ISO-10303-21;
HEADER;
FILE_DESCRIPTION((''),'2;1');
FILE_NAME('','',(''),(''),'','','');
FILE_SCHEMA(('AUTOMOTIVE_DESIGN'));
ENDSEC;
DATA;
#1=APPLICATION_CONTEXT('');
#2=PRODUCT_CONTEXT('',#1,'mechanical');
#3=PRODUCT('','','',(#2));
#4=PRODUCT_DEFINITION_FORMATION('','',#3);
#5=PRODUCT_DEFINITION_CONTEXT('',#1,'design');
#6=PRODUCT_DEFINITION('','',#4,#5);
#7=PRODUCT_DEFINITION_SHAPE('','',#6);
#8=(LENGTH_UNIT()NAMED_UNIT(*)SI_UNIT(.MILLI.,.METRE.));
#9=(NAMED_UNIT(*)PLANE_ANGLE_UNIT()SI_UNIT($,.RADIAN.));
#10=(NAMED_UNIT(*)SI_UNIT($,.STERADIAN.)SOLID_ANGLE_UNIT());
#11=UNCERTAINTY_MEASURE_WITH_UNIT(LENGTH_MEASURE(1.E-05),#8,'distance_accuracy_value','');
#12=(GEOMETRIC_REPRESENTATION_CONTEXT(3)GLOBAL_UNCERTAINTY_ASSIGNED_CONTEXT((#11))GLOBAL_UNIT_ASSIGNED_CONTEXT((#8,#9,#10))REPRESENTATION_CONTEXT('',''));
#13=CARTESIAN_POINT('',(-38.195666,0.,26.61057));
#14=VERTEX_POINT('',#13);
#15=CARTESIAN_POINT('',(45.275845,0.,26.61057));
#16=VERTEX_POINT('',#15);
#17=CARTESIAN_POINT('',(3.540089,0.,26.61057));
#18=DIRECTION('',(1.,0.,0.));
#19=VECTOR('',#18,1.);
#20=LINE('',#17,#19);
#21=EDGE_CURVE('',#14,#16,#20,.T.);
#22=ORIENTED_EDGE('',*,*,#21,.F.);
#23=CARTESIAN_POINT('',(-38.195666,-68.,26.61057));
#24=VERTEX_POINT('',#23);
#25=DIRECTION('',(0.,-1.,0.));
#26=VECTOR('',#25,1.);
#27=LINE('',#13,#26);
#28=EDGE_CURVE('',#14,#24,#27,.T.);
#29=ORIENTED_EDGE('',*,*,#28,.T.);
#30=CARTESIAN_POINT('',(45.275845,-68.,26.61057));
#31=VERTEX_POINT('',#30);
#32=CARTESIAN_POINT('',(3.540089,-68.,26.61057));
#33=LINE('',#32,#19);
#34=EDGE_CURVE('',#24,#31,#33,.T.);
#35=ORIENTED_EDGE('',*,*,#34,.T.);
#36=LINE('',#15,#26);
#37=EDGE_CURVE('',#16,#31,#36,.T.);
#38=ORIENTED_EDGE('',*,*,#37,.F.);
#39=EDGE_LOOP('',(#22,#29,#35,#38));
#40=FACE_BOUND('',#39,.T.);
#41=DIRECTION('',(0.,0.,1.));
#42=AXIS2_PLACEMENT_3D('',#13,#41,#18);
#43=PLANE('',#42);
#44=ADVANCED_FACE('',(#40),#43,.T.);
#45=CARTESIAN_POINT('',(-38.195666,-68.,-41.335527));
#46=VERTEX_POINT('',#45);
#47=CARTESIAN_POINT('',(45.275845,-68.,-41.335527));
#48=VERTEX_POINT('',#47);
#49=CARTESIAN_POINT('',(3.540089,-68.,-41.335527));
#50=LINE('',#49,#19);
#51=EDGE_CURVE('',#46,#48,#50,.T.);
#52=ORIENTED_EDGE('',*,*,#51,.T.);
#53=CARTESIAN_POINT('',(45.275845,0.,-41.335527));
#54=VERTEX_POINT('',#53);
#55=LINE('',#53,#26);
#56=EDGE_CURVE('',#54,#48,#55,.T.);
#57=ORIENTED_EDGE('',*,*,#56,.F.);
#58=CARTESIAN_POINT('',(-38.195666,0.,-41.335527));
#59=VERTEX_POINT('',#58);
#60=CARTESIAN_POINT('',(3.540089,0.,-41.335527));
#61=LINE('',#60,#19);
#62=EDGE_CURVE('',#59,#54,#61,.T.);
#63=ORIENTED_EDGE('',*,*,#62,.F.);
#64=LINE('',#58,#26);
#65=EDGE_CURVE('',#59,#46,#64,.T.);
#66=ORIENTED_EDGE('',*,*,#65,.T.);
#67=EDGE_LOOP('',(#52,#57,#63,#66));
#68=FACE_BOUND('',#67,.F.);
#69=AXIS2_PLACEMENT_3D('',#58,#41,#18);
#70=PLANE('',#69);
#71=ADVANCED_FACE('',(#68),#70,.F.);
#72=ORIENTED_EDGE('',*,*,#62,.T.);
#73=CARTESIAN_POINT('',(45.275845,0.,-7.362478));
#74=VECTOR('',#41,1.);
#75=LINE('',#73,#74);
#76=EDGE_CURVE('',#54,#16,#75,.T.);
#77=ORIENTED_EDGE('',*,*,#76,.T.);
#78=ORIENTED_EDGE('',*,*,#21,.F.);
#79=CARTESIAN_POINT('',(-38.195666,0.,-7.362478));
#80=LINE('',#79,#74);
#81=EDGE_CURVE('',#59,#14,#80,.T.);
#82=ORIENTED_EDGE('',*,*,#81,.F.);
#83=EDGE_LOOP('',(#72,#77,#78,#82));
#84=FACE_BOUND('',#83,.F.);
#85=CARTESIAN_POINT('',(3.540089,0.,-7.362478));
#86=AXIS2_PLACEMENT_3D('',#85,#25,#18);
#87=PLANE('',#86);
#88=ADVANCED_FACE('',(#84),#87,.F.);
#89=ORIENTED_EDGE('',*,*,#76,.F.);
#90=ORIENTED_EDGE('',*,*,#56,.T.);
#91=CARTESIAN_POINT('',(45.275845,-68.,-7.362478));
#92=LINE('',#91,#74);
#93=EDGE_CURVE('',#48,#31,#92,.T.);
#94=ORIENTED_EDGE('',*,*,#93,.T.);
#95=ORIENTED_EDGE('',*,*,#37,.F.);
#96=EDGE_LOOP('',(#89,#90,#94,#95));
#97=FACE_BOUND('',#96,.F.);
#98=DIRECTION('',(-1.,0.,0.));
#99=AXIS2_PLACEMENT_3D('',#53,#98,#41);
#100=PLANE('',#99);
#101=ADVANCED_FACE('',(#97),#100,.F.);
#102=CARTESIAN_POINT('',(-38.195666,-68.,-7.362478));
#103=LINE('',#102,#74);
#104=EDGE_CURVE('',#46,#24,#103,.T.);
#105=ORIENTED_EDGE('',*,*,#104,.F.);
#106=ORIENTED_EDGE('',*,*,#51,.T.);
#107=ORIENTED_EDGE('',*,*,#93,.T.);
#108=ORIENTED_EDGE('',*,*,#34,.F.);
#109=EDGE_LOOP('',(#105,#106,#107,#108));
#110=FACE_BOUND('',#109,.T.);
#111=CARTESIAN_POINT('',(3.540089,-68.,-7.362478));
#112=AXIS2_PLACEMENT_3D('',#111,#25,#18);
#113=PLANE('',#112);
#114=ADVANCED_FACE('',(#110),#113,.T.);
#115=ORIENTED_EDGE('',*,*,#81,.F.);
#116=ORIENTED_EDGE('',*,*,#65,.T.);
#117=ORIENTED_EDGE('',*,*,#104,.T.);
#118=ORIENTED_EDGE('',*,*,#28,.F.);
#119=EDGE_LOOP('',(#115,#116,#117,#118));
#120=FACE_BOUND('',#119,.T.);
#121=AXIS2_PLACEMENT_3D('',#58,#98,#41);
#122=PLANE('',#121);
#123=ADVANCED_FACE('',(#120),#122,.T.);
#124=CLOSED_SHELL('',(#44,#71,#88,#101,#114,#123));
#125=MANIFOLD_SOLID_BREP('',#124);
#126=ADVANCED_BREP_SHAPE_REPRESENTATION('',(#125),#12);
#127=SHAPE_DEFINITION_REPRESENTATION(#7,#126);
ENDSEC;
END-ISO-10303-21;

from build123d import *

# Parameters (mm, degrees)
F0_W     = 83.4715105593
F0_H     = 67.9460968822
F1_DEPTH = 68


# Not quite as in the source:
# - a feature of the source that left no trace in its solid (it failed there, or was rolled back) is left out


with BuildPart() as f1:
    # F0 (on Front) → F1 (new body)
    with BuildSketch(Plane.XZ):
        with Locations((3.5400893539, -7.3624784127)):
            Rectangle(F0_W, F0_H)
    extrude(amount=F1_DEPTH)


solid = f1.part
